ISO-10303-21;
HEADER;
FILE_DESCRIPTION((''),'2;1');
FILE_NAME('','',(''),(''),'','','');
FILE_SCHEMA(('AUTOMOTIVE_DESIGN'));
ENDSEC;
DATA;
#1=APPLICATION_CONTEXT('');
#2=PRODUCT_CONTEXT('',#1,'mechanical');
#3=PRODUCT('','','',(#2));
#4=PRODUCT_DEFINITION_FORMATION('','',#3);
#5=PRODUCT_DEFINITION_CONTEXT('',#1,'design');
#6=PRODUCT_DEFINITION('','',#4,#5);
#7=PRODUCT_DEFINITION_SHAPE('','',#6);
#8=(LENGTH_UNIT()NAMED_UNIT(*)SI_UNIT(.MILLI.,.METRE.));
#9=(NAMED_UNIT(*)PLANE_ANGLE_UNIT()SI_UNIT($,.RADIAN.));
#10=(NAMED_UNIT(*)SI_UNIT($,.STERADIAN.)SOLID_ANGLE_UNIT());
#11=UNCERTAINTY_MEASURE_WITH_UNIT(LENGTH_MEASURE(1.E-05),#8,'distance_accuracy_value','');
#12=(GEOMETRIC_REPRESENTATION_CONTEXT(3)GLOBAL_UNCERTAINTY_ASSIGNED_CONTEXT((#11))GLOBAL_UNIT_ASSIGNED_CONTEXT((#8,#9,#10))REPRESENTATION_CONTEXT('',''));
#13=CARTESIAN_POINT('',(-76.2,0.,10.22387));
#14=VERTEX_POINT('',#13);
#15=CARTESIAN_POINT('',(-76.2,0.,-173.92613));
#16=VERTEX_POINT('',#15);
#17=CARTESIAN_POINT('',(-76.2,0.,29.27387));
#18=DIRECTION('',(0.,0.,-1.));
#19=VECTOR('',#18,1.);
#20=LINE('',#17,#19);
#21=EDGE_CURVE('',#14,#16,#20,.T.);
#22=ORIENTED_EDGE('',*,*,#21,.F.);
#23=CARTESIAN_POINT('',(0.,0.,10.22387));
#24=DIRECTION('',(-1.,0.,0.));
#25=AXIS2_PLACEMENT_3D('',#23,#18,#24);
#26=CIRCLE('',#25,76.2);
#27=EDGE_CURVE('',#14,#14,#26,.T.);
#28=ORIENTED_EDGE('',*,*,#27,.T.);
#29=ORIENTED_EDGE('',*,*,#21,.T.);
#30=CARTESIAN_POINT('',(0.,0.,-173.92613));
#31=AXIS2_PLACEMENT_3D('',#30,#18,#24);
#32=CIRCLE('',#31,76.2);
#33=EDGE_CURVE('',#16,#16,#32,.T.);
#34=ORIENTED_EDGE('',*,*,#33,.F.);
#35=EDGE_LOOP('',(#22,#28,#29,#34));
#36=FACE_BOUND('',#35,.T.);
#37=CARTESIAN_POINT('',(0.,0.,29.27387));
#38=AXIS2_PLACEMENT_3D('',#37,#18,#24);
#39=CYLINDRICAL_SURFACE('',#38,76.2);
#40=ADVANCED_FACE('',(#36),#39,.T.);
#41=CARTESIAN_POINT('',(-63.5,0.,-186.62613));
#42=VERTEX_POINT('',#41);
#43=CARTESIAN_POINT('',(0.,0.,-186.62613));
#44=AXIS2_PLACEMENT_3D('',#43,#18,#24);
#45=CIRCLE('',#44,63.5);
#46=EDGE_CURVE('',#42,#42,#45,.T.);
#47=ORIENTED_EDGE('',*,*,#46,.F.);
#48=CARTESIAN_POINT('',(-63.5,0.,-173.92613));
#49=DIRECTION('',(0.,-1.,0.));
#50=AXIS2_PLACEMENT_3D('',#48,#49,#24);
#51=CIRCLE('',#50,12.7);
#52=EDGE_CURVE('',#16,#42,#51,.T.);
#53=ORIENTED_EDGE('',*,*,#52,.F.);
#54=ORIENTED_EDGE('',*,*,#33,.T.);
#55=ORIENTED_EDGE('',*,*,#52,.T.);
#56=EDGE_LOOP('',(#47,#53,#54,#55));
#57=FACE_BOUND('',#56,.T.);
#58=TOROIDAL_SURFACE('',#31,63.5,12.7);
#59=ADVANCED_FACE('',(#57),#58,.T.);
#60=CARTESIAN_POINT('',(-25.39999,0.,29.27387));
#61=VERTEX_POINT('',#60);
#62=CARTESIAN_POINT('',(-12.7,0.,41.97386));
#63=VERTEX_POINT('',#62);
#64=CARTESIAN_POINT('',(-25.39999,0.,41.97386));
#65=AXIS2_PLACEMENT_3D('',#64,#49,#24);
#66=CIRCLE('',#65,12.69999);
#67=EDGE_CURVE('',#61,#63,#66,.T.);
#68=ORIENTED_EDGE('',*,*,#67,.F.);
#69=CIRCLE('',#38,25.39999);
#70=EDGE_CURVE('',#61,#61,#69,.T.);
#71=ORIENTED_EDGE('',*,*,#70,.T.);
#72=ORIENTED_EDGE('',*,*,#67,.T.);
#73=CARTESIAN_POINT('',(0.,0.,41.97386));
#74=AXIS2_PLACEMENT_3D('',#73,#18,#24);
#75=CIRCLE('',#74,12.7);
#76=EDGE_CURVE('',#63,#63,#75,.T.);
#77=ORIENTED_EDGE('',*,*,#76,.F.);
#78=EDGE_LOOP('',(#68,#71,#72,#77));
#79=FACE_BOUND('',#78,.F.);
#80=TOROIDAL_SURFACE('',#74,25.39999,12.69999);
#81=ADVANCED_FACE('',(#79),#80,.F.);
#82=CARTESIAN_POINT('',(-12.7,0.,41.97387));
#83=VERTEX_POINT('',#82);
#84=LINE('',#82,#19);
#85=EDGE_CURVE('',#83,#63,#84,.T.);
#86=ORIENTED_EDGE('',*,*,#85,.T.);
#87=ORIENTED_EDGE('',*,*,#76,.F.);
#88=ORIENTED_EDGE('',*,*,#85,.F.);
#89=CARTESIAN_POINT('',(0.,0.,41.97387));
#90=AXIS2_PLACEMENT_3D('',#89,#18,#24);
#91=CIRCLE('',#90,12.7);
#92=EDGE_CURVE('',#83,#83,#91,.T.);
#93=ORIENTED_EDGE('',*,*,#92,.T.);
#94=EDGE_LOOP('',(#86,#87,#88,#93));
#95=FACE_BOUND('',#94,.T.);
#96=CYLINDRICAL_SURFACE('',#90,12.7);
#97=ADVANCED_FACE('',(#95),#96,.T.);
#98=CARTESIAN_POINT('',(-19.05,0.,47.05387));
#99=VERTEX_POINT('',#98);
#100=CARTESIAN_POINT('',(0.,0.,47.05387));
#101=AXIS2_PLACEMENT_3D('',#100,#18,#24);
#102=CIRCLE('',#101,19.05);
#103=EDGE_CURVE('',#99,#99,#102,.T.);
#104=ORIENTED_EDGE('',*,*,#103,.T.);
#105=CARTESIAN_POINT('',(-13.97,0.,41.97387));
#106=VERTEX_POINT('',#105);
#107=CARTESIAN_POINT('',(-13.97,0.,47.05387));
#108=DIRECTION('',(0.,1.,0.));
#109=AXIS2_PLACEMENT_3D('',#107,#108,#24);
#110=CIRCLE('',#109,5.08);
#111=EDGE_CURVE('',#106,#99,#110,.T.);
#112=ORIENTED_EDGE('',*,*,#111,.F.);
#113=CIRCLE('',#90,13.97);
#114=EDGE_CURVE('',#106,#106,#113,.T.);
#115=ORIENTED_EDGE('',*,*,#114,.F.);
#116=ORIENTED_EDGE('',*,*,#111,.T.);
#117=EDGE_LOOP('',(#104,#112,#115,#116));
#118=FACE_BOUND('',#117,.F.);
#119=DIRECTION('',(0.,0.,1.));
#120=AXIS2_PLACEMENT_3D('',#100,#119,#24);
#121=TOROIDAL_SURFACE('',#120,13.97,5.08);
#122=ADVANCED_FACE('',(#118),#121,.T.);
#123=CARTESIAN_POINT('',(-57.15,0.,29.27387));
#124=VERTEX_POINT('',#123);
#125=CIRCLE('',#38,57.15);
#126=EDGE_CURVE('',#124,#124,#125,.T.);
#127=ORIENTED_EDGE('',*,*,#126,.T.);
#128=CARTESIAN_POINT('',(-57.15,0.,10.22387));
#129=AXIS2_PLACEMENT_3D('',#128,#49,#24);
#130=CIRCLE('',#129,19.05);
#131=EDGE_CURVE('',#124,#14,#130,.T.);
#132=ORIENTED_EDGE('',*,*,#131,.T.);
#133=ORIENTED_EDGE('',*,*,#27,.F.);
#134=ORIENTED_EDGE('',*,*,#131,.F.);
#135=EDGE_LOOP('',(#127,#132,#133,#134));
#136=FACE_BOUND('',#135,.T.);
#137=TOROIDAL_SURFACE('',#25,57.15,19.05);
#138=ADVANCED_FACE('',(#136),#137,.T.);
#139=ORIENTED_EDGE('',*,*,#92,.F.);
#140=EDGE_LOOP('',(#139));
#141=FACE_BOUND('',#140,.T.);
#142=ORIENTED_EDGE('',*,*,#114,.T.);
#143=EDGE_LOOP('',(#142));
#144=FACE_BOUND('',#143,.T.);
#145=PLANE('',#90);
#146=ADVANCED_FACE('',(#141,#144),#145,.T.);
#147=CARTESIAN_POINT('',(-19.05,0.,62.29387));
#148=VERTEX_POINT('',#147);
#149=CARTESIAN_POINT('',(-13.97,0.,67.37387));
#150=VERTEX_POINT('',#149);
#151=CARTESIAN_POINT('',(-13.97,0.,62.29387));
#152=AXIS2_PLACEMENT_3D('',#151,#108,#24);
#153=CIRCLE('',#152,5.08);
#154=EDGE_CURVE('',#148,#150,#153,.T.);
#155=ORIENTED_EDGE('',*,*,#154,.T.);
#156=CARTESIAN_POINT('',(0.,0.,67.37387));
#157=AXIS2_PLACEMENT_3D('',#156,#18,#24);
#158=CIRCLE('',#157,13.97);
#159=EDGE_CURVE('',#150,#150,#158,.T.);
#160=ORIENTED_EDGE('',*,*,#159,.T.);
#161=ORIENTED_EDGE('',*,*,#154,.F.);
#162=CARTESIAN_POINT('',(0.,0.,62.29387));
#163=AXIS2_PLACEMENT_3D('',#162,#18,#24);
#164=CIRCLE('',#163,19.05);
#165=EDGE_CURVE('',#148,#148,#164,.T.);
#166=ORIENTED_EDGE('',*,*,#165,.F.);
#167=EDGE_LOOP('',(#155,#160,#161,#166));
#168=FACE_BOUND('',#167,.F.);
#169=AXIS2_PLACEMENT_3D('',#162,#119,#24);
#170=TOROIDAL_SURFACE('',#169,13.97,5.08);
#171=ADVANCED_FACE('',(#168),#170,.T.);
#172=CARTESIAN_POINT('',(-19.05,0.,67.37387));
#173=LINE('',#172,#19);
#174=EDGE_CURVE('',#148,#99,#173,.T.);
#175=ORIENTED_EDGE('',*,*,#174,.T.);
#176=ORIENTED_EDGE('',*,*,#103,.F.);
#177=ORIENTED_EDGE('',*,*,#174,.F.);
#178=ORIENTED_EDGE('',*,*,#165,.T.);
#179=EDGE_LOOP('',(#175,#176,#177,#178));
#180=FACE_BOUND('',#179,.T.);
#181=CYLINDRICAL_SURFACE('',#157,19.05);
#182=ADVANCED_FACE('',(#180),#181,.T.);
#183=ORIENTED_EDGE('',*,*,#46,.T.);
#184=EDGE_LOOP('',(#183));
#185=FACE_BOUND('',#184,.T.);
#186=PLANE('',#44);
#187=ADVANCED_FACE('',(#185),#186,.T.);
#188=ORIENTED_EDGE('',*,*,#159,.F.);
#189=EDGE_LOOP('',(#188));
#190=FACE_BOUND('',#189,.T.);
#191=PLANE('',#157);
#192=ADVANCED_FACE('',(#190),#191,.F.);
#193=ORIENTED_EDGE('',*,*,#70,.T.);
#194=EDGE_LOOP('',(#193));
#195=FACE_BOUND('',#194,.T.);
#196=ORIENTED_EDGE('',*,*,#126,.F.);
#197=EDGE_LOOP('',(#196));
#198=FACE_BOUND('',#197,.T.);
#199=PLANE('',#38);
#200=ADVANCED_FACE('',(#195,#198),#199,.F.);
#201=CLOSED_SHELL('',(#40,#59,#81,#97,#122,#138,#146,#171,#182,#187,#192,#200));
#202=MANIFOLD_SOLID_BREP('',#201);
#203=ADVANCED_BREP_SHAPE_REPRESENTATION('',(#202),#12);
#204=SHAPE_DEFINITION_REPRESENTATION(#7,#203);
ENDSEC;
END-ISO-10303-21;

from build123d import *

# Parameters (mm, degrees)
F0_W = 76.2
F0_H = 12.7
F2_R = 19.05
F3_R = 12.7
F4_R = 12.69999
F5_R = 5.08
F6_R = 5.08


# Not quite as in the source:
# - a fillet or chamfer is up to 0.001 mm smaller than in the source, because OpenCascade refuses the exact size


with BuildPart() as f1:
    # F0 (on Front) → F1 (revolve)
    with BuildSketch(Plane.XZ):
        with Locations((-38.1, -180.2761299372)):
            Rectangle(F0_W, F0_H)
        Polygon((-76.2, -173.9261299372), (0, -173.9261299372), (0, 29.2738700628), (-12.7, 29.2738700628), (-76.2, 29.2738700628), align=None)
        Polygon((-12.7, 29.2738700628), (0, 29.2738700628), (0, 35.6238700628), (0, 41.9738700628), (-12.7, 41.9738700628), align=None)
        Polygon((-19.05, 41.9738700628), (-12.7, 41.9738700628), (0, 41.9738700628), (0, 61.0238700628), (0, 67.3738700628), (-19.05, 67.3738700628), align=None)
    revolve(axis=Axis((0, 0, -14.5017058273), (0, 0, -1)))

    # F2
    f2_edges = [f1.edges().sort_by_distance(p)[0] for p in [
        (76.2, 0, 29.27387),
    ]]
    fillet(f2_edges, radius=F2_R)

    # F3
    f3_edges = [f1.edges().sort_by_distance(p)[0] for p in [
        (76.2, 0, -186.62613),
    ]]
    fillet(f3_edges, radius=F3_R)

    # F4 (radius 12.7 in the source; OpenCascade refuses exactly that, so slightly less here)
    f4_edges = [f1.edges().sort_by_distance(p)[0] for p in [
        (12.7, 0, 29.27387),
    ]]
    fillet(f4_edges, radius=F4_R)

    # F5
    f5_edges = [f1.edges().sort_by_distance(p)[0] for p in [
        (19.05, 0, 41.97387),
    ]]
    fillet(f5_edges, radius=F5_R)

    # F6
    f6_edges = [f1.edges().sort_by_distance(p)[0] for p in [
        (19.05, 0, 67.37387),
    ]]
    fillet(f6_edges, radius=F6_R)


solid = f1.part
